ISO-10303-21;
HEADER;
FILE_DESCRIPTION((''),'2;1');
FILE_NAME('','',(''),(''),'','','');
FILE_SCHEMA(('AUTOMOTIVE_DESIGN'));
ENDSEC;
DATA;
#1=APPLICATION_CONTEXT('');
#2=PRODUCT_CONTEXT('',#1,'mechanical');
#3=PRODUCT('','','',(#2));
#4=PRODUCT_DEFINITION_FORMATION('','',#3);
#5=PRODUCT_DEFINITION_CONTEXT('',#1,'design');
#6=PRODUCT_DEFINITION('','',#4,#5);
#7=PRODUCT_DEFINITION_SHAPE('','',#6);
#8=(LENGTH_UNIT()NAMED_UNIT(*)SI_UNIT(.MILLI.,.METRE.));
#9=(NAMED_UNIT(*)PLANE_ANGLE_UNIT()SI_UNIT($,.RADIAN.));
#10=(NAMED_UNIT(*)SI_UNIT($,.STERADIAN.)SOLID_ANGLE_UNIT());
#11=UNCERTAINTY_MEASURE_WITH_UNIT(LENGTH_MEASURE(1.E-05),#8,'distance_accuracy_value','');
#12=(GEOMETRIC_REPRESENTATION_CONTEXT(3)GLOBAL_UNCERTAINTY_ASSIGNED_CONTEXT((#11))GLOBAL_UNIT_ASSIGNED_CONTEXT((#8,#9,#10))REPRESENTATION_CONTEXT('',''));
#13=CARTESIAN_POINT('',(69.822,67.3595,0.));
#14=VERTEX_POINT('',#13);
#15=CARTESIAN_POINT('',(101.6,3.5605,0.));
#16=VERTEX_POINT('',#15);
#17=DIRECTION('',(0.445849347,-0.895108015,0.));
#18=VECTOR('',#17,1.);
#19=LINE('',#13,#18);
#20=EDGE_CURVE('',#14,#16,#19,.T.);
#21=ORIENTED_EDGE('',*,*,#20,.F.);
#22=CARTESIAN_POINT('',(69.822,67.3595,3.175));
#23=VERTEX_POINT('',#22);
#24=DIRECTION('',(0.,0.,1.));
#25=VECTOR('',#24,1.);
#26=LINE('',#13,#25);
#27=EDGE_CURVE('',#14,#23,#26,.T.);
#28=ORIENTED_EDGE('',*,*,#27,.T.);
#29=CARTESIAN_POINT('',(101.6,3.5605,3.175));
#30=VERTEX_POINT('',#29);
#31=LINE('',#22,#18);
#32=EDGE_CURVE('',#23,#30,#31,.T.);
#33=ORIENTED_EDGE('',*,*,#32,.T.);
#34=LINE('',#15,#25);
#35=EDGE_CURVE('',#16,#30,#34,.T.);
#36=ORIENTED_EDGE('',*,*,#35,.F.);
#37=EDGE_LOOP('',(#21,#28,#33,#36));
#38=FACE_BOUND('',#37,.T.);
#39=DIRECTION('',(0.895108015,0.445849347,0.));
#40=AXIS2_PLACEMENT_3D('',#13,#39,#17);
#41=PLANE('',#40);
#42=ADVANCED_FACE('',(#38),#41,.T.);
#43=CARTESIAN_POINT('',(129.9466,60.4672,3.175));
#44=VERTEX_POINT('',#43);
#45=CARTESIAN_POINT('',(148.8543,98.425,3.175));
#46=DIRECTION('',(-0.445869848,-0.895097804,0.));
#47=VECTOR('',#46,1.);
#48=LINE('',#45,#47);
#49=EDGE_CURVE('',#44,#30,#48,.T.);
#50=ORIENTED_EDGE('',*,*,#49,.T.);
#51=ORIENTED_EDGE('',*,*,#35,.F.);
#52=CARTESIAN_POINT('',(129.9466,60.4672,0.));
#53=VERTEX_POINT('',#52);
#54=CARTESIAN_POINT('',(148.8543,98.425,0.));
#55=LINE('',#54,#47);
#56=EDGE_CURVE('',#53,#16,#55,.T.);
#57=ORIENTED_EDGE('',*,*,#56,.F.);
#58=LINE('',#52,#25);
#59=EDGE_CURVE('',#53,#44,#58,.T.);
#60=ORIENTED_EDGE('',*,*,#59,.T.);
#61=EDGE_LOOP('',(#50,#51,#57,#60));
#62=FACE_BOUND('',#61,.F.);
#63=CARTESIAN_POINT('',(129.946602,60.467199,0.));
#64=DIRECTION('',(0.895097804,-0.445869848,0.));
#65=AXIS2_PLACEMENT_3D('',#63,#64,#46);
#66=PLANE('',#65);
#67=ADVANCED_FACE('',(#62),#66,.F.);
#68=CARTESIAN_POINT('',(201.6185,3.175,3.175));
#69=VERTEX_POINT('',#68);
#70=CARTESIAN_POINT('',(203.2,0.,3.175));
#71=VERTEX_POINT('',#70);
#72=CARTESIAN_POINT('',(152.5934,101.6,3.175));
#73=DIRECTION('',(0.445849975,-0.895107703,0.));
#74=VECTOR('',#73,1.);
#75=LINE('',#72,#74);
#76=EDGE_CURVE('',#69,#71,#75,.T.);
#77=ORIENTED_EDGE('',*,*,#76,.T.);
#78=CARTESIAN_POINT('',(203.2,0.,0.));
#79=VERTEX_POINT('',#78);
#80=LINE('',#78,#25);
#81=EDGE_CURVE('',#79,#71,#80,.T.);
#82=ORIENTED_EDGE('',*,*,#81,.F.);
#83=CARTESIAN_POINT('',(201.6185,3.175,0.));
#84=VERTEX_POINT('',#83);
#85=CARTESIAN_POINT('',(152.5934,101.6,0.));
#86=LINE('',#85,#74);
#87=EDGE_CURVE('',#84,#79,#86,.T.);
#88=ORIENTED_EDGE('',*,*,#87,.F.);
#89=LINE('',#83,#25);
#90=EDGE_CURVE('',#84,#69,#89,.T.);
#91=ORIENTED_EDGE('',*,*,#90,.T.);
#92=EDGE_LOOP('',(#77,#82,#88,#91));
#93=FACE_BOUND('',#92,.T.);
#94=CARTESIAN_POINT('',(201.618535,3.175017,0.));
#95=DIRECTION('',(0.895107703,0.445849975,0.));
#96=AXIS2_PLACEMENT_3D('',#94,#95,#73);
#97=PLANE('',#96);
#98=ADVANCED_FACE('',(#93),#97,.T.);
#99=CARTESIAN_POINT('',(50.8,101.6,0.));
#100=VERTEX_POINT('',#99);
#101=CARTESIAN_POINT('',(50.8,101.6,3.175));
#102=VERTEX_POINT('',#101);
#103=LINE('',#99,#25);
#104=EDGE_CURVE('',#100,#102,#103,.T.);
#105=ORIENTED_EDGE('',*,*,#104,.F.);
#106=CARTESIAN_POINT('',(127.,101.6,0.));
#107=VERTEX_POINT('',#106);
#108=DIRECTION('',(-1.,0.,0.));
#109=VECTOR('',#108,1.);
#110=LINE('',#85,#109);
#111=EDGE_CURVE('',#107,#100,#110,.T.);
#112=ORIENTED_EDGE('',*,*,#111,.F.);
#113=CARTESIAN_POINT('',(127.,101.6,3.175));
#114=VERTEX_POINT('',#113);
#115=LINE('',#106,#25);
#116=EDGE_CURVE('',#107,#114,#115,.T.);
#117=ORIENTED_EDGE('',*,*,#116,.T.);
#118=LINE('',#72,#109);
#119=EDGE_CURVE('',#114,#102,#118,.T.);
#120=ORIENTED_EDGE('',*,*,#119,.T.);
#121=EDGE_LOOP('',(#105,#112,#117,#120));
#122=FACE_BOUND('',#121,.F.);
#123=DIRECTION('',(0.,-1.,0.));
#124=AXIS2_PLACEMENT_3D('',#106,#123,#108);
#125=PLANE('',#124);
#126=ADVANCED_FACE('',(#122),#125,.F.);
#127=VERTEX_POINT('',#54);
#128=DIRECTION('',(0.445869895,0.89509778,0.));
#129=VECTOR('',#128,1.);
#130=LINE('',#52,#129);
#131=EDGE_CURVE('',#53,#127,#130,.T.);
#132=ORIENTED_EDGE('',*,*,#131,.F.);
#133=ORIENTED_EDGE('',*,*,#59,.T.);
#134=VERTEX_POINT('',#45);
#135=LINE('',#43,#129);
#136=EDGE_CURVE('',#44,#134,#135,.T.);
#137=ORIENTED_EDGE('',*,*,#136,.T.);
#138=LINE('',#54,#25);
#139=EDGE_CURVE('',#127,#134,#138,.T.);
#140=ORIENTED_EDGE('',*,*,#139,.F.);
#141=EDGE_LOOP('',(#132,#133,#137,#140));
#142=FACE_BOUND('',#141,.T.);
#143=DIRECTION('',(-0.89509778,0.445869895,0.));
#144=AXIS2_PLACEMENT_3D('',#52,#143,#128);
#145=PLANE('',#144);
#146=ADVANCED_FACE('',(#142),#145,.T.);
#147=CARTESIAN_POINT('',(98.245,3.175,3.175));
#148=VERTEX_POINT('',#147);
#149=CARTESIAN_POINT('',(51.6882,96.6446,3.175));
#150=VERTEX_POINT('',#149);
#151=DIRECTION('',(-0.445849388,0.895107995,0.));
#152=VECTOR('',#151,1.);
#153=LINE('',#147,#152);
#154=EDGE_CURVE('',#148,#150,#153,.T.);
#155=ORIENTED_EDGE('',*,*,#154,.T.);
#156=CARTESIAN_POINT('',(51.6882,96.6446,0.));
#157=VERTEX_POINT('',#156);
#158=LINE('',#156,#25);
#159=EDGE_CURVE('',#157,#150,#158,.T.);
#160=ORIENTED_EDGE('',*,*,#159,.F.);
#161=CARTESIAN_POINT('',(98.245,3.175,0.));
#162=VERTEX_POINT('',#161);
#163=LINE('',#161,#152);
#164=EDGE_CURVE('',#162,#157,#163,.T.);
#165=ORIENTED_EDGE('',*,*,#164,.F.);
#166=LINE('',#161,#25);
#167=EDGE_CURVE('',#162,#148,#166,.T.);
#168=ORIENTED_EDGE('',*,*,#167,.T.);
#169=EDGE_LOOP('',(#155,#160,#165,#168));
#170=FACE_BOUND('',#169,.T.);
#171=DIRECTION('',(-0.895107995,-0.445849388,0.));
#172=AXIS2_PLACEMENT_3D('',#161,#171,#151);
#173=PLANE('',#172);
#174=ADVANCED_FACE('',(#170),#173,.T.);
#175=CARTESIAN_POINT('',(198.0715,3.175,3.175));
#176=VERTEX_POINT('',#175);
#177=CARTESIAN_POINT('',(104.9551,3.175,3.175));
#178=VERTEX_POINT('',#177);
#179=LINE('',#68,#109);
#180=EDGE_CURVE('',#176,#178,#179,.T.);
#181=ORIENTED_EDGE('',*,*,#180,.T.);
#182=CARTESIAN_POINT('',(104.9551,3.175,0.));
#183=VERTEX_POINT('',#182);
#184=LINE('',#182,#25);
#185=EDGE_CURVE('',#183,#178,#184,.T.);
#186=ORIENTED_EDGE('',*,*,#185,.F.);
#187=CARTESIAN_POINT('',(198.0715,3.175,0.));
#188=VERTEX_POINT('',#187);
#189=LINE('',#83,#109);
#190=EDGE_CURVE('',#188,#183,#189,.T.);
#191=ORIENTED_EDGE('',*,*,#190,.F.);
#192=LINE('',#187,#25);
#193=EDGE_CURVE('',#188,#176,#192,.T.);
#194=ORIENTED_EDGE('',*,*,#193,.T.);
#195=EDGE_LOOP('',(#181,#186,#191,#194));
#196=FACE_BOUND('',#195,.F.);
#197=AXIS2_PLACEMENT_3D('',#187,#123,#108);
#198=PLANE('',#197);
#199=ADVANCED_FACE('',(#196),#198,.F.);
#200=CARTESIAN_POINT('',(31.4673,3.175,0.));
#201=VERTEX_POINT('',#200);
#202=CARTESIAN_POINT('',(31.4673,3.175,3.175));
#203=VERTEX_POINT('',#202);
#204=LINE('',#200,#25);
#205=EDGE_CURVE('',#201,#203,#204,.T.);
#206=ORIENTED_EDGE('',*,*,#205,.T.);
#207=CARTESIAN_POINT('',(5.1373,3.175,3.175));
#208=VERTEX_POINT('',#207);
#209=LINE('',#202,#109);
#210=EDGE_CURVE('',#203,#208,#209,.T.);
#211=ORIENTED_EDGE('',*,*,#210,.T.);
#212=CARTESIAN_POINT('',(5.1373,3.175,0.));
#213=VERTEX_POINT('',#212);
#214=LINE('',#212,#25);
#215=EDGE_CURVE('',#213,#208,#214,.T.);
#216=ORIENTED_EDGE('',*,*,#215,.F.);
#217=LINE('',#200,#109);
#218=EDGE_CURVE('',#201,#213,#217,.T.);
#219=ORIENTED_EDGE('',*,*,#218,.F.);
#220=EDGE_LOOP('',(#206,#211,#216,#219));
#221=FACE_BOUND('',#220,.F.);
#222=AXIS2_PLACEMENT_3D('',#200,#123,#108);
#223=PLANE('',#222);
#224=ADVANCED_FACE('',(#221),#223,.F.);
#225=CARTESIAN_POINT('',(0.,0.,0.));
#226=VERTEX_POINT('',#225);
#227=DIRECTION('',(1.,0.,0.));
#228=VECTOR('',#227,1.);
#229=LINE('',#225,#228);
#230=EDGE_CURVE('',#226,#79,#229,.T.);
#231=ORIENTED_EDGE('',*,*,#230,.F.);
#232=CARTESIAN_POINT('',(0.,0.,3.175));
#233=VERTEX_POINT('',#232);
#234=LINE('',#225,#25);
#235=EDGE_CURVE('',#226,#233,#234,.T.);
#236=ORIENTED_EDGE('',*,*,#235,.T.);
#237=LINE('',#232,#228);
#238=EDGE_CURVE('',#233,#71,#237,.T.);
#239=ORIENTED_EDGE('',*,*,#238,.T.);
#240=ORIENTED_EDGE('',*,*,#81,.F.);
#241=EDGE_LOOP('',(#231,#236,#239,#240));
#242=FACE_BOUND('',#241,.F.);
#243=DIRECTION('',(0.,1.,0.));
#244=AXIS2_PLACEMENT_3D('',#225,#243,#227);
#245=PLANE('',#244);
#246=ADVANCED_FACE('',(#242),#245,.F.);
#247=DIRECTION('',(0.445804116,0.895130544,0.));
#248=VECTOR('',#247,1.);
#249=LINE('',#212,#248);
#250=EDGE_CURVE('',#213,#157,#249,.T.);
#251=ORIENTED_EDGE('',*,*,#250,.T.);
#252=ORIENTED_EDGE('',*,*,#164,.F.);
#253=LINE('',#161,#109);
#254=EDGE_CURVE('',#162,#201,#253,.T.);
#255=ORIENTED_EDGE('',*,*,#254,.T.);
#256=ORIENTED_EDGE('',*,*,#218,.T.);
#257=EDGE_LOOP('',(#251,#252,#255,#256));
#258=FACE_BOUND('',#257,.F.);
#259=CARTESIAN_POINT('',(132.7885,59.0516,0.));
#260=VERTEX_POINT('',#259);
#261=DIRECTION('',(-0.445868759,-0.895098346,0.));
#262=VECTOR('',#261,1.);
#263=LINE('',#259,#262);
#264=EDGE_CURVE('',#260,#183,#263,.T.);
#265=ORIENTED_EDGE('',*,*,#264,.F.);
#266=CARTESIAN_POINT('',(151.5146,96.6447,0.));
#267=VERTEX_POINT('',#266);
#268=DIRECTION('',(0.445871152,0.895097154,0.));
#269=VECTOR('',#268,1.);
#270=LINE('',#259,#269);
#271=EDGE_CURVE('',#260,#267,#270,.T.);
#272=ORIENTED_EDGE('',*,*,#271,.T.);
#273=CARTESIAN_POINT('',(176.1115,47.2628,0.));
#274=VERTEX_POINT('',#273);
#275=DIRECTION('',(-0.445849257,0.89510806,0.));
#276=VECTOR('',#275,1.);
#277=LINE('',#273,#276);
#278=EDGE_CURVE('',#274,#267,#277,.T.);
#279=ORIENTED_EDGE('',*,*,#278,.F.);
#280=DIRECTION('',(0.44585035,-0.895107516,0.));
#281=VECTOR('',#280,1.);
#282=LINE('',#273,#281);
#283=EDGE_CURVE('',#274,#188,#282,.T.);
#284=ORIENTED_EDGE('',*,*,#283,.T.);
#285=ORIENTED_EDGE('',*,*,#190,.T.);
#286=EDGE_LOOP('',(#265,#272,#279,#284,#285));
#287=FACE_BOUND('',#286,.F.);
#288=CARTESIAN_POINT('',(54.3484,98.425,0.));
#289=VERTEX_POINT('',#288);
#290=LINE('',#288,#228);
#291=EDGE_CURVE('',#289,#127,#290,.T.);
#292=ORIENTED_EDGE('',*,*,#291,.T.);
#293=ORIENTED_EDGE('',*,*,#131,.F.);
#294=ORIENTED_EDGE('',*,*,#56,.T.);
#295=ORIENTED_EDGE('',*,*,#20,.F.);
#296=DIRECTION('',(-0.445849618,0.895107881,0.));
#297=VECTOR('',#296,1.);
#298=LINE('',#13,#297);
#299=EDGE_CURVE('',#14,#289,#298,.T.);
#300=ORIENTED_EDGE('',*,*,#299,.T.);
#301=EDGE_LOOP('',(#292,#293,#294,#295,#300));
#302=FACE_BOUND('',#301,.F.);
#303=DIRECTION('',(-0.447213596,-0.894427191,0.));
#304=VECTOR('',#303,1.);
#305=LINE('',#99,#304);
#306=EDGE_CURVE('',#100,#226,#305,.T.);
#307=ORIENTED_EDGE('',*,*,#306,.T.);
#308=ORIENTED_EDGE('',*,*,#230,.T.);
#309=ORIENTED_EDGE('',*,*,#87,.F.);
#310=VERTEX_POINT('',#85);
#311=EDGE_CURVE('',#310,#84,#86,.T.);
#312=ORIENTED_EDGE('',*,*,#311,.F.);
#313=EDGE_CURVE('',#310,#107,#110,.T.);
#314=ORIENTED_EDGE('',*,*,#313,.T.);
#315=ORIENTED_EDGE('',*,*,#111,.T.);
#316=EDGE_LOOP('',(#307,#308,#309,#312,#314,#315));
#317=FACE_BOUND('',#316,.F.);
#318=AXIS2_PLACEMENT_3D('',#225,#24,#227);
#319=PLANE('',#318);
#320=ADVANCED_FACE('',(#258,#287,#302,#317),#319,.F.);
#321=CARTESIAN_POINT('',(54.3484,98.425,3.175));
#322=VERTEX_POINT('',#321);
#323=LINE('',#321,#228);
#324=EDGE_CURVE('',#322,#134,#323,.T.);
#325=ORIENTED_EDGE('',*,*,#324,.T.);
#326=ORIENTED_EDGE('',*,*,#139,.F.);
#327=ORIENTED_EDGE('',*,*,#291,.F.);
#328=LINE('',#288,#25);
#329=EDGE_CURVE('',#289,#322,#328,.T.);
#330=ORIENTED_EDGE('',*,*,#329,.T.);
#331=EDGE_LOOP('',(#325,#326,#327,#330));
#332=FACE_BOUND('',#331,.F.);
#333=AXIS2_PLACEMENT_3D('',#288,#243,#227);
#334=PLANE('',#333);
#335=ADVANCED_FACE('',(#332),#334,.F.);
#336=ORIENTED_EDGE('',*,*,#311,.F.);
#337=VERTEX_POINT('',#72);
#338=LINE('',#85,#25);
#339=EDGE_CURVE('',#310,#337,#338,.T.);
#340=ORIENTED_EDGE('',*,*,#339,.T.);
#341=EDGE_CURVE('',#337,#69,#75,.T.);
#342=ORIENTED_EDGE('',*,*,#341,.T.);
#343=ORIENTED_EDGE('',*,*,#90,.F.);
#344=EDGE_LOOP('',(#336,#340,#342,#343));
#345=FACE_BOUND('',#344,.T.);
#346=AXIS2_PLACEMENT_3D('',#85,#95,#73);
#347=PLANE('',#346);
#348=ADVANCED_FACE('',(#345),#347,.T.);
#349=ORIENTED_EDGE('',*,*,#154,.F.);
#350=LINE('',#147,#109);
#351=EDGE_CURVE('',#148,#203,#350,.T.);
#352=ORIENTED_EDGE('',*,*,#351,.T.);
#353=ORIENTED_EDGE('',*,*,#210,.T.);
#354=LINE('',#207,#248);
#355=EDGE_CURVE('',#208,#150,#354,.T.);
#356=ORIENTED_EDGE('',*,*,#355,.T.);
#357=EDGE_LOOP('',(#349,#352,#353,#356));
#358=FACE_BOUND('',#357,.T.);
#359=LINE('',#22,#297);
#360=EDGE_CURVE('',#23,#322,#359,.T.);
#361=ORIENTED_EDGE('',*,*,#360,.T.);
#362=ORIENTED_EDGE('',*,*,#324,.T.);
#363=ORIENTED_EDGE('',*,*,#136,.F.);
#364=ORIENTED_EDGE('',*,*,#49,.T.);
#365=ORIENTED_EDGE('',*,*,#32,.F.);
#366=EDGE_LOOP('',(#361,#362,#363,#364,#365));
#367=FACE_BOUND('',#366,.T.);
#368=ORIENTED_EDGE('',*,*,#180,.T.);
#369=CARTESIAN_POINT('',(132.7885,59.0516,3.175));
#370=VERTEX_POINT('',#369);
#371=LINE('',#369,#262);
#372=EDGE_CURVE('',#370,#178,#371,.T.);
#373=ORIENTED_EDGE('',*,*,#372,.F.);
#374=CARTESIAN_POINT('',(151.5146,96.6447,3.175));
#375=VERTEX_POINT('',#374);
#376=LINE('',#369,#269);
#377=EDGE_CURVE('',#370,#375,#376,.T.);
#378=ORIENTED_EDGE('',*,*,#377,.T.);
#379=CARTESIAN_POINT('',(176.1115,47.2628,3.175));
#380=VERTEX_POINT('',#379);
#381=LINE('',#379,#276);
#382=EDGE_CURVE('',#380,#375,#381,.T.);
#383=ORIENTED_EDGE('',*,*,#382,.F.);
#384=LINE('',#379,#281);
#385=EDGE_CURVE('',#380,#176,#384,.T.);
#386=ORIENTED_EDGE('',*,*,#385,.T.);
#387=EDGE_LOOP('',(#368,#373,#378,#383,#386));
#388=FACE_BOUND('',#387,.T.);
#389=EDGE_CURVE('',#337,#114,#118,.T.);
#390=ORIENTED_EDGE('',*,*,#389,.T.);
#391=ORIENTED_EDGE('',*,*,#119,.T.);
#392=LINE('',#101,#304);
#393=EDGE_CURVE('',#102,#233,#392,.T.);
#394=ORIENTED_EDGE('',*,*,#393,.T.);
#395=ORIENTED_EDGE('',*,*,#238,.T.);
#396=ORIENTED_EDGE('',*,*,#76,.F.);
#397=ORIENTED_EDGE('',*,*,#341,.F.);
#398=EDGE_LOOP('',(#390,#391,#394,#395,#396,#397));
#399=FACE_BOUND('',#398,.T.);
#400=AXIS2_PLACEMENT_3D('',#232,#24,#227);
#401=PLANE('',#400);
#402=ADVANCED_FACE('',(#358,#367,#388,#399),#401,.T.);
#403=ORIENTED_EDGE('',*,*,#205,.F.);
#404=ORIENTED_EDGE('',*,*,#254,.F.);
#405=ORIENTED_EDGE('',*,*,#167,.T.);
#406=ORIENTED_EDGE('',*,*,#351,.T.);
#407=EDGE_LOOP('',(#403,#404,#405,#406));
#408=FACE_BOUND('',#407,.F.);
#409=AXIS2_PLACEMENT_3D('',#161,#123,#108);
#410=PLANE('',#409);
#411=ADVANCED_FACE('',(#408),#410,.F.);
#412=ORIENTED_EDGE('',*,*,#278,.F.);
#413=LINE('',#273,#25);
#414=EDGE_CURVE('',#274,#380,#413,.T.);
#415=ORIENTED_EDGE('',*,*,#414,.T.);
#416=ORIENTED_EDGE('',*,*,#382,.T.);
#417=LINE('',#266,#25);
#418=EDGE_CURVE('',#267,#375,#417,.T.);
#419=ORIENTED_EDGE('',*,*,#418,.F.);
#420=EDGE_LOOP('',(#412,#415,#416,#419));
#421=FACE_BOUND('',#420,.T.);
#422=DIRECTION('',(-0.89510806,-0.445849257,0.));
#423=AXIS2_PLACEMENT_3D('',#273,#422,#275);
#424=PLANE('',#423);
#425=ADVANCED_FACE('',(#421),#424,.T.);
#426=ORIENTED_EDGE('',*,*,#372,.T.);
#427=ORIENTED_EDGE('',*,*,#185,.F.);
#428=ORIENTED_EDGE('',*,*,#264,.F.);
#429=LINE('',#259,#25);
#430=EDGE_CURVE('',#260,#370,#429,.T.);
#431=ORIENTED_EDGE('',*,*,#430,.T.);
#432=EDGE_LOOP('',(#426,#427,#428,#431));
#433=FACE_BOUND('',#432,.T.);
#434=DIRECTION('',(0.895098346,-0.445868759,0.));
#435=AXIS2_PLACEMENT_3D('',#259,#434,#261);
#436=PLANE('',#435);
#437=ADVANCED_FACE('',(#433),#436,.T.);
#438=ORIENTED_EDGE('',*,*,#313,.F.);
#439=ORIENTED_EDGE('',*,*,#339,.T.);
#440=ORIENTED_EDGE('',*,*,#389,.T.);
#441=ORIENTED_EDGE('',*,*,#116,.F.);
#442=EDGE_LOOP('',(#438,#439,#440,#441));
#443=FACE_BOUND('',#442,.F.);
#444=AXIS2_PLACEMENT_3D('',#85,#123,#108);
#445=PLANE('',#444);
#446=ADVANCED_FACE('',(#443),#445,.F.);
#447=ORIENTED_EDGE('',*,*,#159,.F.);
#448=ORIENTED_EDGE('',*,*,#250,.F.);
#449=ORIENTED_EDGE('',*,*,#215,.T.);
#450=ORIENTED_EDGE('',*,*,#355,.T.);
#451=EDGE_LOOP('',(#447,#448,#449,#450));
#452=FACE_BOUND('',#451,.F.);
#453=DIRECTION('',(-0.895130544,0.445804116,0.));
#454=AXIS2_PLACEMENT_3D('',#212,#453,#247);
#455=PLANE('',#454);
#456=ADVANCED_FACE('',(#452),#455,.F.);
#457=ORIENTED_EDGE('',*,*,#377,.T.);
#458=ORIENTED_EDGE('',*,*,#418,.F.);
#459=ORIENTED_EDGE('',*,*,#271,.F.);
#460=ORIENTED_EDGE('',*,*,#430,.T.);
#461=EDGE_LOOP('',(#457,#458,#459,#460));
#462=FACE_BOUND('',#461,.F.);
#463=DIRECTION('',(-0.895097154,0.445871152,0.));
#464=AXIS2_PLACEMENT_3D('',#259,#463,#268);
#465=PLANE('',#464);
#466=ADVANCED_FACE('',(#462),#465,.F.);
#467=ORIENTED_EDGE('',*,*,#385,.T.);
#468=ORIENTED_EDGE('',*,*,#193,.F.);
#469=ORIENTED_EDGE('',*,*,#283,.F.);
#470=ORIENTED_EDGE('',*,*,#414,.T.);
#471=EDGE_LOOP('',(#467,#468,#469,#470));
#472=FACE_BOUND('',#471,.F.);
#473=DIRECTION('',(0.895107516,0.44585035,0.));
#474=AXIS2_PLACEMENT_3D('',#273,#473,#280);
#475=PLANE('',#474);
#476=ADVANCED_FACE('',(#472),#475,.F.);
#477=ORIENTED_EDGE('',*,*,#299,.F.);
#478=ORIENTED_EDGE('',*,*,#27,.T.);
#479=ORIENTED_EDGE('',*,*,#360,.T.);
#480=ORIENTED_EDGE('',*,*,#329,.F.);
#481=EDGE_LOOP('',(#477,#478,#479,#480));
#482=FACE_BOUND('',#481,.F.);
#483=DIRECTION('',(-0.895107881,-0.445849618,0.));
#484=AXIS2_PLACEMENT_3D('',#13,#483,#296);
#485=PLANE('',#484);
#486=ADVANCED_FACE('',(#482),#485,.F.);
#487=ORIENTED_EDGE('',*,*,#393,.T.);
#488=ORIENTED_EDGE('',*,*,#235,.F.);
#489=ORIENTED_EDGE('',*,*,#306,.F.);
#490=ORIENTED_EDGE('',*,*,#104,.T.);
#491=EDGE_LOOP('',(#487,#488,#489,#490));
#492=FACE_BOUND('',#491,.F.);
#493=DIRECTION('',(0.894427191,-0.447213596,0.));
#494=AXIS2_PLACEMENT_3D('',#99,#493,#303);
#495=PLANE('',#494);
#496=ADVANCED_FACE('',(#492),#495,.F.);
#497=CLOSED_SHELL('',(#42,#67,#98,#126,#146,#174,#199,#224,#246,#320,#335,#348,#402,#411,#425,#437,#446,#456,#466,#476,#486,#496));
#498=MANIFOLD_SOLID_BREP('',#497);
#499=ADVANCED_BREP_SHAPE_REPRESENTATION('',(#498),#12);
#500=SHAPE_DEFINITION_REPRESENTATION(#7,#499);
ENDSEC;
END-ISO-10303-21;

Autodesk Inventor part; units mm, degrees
ref_plane "YZ Plane" through (0, 0, 0) normal (1, 0, 0) x (0, 1, 0)
ref_plane "XZ Plane" through (0, 0, 0) normal (0, 1, 0) x (-1, 0, 0)
ref_plane "XY Plane" through (0, 0, 0) normal (0, 0, 1) x (1, 0, 0)
sketch "Sketch1" plane through (0, 0, 0) normal (0, 0, 1) x (1, 0, 0)
  line L0 (0, 0) -> (203.2, 0)
  line L1 (152.5934, 101.6) -> (50.8, 101.6)
  line L2 (101.6, 0) -> (76.2, 0) construction
  line L3 (127, 101.6) -> (152.5934, 101.6)
  line L4 (0, 0) -> (3.175, 0) construction
  line L5 (152.5934, 101.6) -> (203.2, 0)
  line L6 (50.8, 101.6) -> (0, 0)
  line L7 (52.5749, 98.425) -> (52.6684, 98.2373)
  line L8 (31.4673, 0) -> (31.4673, 3.175) construction
  line L9 (31.4673, 3.175) -> (5.1373, 3.175)
  line L10 (22.7402, 38.3809) -> (5.1373, 3.175)
  line L11 (5.1373, 3.175) -> (51.6882, 96.6446)
  line L12 (176.1115, 47.2628) -> (198.0715, 3.175)
  line L13 (176.1115, 47.2628) -> (151.5146, 96.6447)
  line L14 (54.3484, 98.425) -> (148.8543, 98.425)
  line L15 (66.9801, 65.9439) -> (98.245, 3.175) construction
  line L16 (98.245, 3.175) -> (51.6882, 96.6446)
  line L17 (69.822, 67.3595) -> (54.3484, 98.425)
  line L18 (69.822, 67.3595) -> (101.6, 3.5605)
  line L19 (129.9466, 60.4672) -> (148.8543, 98.425)
  line L20 (132.7885, 59.0516) -> (151.5146, 96.6447)
  line L21 (148.8543, 98.425) -> (101.6, 3.5605)
  line L22 (132.7885, 59.0516) -> (104.9551, 3.175)
  line L23 (98.245, 3.175) -> (31.4673, 3.175)
  line L24 (201.6185, 3.175) -> (104.9551, 3.175)
  dimension "d0" = 203.2
  dimension "d40" = 3.175
  dimension "d42" = 3.175
  dimension "d44" = 3.175
  dimension "d45" = 3.175
  dimension "d51" = 101.6
  dimension "d52" = 93.4696
  dimension "d53" = 94.5059
  dimension "d54" = 96.6634
extrude "Extrusion2" add sketch "Sketch1" along normal blind 3.175
properties part number "Truss 3Tri"
